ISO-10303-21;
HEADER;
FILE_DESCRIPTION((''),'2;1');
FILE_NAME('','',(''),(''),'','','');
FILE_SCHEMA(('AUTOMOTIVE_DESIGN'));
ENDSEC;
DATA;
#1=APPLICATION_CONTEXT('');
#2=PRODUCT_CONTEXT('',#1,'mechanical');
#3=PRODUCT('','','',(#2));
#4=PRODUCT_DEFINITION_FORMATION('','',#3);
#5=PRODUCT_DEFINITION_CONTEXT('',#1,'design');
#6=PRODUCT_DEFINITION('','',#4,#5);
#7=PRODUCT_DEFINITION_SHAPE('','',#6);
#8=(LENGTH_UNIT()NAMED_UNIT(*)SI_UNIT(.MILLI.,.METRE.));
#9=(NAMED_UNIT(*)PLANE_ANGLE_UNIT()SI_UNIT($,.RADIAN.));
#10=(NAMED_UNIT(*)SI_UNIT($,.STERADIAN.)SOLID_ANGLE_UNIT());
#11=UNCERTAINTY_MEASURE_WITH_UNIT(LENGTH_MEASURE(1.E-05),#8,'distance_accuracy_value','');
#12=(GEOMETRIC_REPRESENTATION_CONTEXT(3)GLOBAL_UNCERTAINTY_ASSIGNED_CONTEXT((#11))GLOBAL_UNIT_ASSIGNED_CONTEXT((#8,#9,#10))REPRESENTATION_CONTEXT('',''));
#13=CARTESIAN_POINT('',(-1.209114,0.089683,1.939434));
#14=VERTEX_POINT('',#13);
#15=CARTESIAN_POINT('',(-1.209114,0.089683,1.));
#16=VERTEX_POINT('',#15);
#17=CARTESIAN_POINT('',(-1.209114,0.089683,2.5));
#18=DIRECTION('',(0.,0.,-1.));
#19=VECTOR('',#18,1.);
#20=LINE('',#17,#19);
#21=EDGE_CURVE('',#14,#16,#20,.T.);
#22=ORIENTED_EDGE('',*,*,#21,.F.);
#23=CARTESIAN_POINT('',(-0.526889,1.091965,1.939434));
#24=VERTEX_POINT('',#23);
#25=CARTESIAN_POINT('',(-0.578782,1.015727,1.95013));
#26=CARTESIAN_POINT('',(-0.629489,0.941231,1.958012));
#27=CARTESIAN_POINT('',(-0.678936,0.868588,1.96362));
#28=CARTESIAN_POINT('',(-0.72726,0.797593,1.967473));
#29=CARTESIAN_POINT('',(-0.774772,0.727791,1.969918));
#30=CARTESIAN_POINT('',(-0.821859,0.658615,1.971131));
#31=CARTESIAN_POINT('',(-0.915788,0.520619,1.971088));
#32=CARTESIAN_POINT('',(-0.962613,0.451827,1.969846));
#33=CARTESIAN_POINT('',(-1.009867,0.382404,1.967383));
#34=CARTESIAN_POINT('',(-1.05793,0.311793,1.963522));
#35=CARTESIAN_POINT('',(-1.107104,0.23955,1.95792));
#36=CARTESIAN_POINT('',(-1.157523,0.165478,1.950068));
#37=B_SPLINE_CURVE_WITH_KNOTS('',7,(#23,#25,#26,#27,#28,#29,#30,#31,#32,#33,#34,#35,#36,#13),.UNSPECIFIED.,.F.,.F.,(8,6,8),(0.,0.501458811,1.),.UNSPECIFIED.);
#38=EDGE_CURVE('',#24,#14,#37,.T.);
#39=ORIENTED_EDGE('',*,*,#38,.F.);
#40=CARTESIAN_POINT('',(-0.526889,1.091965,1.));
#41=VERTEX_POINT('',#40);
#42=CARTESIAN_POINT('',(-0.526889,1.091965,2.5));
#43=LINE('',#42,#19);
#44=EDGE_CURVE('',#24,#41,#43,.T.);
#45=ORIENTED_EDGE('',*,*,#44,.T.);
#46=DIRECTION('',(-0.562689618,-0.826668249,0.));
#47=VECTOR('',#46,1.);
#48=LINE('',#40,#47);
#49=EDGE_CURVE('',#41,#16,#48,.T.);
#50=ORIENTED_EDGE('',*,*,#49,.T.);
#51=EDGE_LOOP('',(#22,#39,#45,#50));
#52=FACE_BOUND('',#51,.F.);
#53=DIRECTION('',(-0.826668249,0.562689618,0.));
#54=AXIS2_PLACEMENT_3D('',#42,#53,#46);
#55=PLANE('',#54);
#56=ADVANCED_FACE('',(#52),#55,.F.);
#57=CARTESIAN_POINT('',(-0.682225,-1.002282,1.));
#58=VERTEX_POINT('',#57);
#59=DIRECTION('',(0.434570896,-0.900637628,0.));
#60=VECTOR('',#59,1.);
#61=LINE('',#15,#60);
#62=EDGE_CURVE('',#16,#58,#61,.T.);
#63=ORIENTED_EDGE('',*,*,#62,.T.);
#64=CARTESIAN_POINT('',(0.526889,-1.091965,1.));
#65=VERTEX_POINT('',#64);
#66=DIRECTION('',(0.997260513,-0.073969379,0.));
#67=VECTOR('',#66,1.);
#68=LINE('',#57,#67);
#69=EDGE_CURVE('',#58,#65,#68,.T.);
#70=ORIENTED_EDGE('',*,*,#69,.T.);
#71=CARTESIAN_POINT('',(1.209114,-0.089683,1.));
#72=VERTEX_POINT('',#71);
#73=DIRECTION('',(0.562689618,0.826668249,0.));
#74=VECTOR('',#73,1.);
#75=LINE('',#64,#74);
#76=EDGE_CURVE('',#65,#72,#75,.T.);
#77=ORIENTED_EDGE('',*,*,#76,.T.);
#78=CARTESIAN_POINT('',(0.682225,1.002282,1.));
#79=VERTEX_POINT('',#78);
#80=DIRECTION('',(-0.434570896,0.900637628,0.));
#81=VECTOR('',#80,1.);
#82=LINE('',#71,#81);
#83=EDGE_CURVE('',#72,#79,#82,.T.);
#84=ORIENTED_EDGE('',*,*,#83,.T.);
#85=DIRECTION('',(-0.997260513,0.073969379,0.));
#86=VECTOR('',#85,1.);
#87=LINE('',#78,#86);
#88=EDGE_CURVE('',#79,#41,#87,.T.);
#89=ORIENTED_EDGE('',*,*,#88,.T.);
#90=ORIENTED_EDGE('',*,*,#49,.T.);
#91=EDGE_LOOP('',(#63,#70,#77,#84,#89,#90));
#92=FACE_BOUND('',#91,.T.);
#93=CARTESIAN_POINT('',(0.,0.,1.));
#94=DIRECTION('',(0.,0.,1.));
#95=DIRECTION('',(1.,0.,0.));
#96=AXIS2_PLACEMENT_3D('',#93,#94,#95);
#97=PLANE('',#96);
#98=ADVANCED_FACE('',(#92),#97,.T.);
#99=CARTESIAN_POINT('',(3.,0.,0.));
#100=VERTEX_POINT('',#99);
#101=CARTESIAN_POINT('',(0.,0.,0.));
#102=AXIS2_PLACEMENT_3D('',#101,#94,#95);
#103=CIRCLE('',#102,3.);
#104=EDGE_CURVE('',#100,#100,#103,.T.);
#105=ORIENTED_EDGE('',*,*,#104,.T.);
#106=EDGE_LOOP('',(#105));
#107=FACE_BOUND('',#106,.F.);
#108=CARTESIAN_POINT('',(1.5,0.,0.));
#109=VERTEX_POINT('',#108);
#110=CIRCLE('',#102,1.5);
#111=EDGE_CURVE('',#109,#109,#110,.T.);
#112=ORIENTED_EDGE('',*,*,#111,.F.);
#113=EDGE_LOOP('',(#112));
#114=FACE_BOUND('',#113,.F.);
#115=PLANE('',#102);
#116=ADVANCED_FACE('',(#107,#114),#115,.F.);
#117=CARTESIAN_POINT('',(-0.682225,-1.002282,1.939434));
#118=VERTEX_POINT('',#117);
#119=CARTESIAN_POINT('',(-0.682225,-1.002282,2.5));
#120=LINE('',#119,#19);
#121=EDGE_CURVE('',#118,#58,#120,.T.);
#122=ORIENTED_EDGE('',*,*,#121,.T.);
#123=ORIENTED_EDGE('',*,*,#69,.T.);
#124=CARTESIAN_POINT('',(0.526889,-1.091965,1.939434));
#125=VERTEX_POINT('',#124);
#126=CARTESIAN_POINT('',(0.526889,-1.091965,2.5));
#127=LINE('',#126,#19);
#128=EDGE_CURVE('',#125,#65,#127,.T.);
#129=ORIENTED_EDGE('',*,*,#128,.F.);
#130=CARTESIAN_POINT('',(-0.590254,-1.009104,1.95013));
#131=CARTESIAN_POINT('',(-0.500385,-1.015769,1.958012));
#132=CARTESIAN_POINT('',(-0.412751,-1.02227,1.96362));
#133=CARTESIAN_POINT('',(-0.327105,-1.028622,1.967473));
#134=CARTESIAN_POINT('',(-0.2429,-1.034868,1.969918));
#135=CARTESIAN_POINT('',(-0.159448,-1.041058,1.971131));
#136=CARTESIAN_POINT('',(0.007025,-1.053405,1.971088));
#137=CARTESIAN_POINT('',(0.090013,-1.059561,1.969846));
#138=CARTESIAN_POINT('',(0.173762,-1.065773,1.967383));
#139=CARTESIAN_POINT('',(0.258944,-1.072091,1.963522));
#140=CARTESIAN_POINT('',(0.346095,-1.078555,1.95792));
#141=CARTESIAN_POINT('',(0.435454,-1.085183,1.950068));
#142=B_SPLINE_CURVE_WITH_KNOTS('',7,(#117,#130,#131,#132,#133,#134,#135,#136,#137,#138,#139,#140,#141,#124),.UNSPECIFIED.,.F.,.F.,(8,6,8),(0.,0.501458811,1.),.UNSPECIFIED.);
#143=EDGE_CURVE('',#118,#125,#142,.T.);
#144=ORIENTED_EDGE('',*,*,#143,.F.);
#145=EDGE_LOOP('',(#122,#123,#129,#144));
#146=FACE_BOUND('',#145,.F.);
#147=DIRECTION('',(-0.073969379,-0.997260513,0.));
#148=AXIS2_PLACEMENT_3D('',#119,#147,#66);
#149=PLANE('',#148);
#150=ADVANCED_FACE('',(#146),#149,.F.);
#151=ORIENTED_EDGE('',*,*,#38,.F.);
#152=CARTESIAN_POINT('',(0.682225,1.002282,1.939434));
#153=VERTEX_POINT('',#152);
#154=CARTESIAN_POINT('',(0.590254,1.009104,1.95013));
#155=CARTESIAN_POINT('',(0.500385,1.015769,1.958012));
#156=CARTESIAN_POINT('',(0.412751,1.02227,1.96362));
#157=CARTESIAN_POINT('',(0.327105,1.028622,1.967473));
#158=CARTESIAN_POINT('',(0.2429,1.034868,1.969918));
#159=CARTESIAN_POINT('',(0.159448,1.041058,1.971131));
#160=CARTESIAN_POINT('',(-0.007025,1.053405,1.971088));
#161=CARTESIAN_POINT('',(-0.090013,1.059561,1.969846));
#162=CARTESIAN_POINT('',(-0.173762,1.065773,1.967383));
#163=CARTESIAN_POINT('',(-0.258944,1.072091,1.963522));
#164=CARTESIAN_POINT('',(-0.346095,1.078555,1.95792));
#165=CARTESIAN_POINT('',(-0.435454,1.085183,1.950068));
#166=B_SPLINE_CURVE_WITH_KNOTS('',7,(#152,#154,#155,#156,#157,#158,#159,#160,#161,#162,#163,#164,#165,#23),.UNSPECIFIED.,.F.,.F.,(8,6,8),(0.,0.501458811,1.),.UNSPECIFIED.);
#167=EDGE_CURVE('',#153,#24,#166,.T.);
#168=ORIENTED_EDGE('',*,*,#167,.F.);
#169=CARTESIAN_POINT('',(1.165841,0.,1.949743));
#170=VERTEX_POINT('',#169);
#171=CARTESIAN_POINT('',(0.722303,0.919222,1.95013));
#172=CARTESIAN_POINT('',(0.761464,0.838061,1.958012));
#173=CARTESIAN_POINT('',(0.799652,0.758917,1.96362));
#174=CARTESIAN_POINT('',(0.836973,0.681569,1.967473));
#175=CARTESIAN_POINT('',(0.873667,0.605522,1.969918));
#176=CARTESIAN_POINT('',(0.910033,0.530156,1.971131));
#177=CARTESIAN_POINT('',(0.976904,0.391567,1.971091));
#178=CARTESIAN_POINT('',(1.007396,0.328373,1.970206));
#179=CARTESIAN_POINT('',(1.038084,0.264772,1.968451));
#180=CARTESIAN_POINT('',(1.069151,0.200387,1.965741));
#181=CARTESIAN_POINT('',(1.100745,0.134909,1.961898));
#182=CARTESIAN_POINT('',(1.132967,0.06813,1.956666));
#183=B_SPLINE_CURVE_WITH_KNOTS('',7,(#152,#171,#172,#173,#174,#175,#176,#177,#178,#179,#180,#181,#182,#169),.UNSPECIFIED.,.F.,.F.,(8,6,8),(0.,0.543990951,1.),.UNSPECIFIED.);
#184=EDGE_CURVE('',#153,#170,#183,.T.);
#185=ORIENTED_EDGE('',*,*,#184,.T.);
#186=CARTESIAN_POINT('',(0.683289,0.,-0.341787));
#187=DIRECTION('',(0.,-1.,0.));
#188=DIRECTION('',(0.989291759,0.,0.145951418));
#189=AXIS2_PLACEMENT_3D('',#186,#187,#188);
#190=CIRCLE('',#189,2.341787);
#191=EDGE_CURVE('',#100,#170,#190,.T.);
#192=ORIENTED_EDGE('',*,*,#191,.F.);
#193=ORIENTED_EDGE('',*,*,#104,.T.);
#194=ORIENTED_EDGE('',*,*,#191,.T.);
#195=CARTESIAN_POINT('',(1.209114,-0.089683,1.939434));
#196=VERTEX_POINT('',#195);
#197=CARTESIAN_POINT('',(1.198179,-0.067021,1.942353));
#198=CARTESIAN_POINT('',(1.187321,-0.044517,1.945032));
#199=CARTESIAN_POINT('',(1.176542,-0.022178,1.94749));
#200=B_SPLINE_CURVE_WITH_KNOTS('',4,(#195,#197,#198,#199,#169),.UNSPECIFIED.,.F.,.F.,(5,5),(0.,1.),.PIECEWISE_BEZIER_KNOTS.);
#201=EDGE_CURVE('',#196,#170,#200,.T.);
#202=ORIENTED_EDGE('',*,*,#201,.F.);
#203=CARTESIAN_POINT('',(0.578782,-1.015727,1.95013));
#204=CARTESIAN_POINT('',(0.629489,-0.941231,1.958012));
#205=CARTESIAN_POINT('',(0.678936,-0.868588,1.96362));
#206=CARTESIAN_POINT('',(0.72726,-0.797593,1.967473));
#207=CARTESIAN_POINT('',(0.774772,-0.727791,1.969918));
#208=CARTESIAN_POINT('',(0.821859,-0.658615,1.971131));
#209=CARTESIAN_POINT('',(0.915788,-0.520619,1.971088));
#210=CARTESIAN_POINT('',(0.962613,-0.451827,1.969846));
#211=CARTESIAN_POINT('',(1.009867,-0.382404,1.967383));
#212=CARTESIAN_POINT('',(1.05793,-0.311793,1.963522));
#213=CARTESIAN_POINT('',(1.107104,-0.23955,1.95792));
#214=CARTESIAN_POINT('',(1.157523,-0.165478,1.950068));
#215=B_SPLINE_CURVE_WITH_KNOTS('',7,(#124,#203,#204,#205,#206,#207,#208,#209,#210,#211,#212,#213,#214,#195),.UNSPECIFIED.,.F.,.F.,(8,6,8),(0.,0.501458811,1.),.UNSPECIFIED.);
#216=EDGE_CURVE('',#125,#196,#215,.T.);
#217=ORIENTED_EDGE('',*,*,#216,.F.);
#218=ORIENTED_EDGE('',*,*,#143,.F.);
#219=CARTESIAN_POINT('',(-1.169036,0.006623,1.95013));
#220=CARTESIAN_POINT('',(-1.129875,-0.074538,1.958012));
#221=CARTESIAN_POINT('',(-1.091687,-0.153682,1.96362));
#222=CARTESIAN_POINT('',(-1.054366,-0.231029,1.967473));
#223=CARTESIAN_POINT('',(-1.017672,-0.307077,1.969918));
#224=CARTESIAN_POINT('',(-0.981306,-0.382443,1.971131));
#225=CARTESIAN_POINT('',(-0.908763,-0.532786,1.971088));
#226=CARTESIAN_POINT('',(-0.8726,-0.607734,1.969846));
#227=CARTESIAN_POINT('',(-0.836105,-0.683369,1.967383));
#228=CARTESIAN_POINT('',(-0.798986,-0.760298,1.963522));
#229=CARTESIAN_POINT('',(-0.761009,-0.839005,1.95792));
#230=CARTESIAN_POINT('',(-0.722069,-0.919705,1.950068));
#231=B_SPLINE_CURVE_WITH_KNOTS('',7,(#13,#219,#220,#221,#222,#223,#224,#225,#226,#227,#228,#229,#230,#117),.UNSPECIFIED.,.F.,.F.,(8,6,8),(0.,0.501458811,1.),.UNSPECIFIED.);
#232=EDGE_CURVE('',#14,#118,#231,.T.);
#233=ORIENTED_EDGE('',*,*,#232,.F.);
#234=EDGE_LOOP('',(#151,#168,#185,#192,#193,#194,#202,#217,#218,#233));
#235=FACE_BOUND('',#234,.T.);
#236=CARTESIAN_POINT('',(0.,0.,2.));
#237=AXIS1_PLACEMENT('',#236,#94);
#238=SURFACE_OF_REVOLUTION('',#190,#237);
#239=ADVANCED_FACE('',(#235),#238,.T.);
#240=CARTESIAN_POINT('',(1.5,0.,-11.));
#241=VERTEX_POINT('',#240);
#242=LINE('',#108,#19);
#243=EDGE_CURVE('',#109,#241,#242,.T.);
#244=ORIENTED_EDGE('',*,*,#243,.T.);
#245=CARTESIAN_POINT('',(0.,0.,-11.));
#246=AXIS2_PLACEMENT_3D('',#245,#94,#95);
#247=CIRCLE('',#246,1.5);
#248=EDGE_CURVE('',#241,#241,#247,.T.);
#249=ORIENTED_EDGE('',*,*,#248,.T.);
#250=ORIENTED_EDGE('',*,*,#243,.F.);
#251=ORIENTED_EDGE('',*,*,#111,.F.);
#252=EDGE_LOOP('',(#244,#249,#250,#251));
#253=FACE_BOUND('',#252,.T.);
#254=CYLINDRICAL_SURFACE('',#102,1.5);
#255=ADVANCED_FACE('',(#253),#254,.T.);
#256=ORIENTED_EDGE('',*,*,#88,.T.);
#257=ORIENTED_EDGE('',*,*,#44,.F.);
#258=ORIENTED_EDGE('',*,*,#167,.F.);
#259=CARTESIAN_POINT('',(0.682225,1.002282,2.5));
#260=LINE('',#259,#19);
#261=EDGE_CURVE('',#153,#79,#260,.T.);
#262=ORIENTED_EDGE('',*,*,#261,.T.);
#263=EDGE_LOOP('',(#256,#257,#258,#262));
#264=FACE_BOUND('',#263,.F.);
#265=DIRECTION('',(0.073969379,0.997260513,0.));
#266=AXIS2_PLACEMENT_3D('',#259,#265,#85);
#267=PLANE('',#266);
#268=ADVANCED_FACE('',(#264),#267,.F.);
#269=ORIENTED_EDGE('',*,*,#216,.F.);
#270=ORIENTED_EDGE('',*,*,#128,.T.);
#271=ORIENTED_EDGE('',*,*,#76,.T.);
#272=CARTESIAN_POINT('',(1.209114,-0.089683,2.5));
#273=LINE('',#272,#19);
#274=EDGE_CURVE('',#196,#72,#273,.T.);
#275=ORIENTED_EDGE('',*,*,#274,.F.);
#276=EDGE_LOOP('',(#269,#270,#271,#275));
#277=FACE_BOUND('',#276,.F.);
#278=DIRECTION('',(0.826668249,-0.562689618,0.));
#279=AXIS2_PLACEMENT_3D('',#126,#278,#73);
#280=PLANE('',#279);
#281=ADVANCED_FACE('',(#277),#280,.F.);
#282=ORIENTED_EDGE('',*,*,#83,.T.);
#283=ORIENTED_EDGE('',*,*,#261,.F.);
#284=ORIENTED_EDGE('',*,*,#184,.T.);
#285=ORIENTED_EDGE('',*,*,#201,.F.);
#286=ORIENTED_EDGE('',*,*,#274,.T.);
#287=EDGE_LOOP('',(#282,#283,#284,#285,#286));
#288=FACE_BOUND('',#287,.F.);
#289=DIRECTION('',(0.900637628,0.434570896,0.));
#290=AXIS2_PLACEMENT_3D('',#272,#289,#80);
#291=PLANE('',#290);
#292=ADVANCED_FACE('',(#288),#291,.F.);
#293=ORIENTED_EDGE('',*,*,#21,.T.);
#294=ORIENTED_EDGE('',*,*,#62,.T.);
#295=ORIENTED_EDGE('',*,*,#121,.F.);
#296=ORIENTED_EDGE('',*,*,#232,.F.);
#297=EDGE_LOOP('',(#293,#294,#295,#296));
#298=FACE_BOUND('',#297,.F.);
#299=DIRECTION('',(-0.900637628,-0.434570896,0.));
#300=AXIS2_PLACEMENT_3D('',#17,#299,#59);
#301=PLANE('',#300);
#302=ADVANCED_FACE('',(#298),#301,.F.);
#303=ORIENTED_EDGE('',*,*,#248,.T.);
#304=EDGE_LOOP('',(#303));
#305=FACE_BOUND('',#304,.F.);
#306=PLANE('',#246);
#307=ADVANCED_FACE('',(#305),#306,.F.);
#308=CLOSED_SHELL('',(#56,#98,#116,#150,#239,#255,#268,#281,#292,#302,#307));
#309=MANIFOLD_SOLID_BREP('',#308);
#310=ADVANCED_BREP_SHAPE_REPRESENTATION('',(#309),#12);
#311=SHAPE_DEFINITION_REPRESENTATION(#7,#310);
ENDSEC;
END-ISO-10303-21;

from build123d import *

# Parameters (mm, degrees)
F0_R     = 3
F0_R_2   = 1.5
F1_DEPTH = 2
F2_DEPTH = 11
F6_DEPTH = 1.5


# Not quite as in the source:
# - a fillet or chamfer that OpenCascade refuses, or shapes differently, is made with other operations: its cross-section is extruded or revolved along the edge and cut away or added


with BuildPart() as f1:
    # F0 (on Top) → F1 (new body)
    with BuildSketch(Plane.XY):
        Circle(F0_R)
        Circle(F0_R_2, mode=Mode.SUBTRACT)
        Circle(F0_R_2)
    extrude(amount=F1_DEPTH)

    # F0 (on Top) → F2 (join)
    with BuildSketch(Plane.XY):
        Circle(F0_R_2)
    extrude(amount=-F2_DEPTH)

    # F3: fillet of radius 2.3417871555 on 1 edges, made by hand

    # F3_s1 → F3_t2 (revolve, cut)
    with BuildSketch(Plane.XZ):
        with BuildLine():
            ThreePointArc((3, 0), (2.2135791593, 1.4308323542), (0.6832892667, 2))
            Line((0.6832892667, 2), (3, 2))
            Line((3, 2), (3, 0))
        make_face()
    revolve(axis=Axis((0, 0, 2), (0, 0, 1)), mode=Mode.SUBTRACT)

    # F5 (on offset) → F6 (cut)
    with BuildSketch(Plane.XY.offset(2.5)):
        Polygon((0.5268892093, -1.0919650915), (1.209114114, -0.0896831055), (0.6822249046, 1.002281986), (-0.5268892093, 1.0919650915), (-1.209114114, 0.0896831055), (-0.6822249046, -1.002281986), align=None)
    extrude(amount=-F6_DEPTH, mode=Mode.SUBTRACT)


solid = f1.part
